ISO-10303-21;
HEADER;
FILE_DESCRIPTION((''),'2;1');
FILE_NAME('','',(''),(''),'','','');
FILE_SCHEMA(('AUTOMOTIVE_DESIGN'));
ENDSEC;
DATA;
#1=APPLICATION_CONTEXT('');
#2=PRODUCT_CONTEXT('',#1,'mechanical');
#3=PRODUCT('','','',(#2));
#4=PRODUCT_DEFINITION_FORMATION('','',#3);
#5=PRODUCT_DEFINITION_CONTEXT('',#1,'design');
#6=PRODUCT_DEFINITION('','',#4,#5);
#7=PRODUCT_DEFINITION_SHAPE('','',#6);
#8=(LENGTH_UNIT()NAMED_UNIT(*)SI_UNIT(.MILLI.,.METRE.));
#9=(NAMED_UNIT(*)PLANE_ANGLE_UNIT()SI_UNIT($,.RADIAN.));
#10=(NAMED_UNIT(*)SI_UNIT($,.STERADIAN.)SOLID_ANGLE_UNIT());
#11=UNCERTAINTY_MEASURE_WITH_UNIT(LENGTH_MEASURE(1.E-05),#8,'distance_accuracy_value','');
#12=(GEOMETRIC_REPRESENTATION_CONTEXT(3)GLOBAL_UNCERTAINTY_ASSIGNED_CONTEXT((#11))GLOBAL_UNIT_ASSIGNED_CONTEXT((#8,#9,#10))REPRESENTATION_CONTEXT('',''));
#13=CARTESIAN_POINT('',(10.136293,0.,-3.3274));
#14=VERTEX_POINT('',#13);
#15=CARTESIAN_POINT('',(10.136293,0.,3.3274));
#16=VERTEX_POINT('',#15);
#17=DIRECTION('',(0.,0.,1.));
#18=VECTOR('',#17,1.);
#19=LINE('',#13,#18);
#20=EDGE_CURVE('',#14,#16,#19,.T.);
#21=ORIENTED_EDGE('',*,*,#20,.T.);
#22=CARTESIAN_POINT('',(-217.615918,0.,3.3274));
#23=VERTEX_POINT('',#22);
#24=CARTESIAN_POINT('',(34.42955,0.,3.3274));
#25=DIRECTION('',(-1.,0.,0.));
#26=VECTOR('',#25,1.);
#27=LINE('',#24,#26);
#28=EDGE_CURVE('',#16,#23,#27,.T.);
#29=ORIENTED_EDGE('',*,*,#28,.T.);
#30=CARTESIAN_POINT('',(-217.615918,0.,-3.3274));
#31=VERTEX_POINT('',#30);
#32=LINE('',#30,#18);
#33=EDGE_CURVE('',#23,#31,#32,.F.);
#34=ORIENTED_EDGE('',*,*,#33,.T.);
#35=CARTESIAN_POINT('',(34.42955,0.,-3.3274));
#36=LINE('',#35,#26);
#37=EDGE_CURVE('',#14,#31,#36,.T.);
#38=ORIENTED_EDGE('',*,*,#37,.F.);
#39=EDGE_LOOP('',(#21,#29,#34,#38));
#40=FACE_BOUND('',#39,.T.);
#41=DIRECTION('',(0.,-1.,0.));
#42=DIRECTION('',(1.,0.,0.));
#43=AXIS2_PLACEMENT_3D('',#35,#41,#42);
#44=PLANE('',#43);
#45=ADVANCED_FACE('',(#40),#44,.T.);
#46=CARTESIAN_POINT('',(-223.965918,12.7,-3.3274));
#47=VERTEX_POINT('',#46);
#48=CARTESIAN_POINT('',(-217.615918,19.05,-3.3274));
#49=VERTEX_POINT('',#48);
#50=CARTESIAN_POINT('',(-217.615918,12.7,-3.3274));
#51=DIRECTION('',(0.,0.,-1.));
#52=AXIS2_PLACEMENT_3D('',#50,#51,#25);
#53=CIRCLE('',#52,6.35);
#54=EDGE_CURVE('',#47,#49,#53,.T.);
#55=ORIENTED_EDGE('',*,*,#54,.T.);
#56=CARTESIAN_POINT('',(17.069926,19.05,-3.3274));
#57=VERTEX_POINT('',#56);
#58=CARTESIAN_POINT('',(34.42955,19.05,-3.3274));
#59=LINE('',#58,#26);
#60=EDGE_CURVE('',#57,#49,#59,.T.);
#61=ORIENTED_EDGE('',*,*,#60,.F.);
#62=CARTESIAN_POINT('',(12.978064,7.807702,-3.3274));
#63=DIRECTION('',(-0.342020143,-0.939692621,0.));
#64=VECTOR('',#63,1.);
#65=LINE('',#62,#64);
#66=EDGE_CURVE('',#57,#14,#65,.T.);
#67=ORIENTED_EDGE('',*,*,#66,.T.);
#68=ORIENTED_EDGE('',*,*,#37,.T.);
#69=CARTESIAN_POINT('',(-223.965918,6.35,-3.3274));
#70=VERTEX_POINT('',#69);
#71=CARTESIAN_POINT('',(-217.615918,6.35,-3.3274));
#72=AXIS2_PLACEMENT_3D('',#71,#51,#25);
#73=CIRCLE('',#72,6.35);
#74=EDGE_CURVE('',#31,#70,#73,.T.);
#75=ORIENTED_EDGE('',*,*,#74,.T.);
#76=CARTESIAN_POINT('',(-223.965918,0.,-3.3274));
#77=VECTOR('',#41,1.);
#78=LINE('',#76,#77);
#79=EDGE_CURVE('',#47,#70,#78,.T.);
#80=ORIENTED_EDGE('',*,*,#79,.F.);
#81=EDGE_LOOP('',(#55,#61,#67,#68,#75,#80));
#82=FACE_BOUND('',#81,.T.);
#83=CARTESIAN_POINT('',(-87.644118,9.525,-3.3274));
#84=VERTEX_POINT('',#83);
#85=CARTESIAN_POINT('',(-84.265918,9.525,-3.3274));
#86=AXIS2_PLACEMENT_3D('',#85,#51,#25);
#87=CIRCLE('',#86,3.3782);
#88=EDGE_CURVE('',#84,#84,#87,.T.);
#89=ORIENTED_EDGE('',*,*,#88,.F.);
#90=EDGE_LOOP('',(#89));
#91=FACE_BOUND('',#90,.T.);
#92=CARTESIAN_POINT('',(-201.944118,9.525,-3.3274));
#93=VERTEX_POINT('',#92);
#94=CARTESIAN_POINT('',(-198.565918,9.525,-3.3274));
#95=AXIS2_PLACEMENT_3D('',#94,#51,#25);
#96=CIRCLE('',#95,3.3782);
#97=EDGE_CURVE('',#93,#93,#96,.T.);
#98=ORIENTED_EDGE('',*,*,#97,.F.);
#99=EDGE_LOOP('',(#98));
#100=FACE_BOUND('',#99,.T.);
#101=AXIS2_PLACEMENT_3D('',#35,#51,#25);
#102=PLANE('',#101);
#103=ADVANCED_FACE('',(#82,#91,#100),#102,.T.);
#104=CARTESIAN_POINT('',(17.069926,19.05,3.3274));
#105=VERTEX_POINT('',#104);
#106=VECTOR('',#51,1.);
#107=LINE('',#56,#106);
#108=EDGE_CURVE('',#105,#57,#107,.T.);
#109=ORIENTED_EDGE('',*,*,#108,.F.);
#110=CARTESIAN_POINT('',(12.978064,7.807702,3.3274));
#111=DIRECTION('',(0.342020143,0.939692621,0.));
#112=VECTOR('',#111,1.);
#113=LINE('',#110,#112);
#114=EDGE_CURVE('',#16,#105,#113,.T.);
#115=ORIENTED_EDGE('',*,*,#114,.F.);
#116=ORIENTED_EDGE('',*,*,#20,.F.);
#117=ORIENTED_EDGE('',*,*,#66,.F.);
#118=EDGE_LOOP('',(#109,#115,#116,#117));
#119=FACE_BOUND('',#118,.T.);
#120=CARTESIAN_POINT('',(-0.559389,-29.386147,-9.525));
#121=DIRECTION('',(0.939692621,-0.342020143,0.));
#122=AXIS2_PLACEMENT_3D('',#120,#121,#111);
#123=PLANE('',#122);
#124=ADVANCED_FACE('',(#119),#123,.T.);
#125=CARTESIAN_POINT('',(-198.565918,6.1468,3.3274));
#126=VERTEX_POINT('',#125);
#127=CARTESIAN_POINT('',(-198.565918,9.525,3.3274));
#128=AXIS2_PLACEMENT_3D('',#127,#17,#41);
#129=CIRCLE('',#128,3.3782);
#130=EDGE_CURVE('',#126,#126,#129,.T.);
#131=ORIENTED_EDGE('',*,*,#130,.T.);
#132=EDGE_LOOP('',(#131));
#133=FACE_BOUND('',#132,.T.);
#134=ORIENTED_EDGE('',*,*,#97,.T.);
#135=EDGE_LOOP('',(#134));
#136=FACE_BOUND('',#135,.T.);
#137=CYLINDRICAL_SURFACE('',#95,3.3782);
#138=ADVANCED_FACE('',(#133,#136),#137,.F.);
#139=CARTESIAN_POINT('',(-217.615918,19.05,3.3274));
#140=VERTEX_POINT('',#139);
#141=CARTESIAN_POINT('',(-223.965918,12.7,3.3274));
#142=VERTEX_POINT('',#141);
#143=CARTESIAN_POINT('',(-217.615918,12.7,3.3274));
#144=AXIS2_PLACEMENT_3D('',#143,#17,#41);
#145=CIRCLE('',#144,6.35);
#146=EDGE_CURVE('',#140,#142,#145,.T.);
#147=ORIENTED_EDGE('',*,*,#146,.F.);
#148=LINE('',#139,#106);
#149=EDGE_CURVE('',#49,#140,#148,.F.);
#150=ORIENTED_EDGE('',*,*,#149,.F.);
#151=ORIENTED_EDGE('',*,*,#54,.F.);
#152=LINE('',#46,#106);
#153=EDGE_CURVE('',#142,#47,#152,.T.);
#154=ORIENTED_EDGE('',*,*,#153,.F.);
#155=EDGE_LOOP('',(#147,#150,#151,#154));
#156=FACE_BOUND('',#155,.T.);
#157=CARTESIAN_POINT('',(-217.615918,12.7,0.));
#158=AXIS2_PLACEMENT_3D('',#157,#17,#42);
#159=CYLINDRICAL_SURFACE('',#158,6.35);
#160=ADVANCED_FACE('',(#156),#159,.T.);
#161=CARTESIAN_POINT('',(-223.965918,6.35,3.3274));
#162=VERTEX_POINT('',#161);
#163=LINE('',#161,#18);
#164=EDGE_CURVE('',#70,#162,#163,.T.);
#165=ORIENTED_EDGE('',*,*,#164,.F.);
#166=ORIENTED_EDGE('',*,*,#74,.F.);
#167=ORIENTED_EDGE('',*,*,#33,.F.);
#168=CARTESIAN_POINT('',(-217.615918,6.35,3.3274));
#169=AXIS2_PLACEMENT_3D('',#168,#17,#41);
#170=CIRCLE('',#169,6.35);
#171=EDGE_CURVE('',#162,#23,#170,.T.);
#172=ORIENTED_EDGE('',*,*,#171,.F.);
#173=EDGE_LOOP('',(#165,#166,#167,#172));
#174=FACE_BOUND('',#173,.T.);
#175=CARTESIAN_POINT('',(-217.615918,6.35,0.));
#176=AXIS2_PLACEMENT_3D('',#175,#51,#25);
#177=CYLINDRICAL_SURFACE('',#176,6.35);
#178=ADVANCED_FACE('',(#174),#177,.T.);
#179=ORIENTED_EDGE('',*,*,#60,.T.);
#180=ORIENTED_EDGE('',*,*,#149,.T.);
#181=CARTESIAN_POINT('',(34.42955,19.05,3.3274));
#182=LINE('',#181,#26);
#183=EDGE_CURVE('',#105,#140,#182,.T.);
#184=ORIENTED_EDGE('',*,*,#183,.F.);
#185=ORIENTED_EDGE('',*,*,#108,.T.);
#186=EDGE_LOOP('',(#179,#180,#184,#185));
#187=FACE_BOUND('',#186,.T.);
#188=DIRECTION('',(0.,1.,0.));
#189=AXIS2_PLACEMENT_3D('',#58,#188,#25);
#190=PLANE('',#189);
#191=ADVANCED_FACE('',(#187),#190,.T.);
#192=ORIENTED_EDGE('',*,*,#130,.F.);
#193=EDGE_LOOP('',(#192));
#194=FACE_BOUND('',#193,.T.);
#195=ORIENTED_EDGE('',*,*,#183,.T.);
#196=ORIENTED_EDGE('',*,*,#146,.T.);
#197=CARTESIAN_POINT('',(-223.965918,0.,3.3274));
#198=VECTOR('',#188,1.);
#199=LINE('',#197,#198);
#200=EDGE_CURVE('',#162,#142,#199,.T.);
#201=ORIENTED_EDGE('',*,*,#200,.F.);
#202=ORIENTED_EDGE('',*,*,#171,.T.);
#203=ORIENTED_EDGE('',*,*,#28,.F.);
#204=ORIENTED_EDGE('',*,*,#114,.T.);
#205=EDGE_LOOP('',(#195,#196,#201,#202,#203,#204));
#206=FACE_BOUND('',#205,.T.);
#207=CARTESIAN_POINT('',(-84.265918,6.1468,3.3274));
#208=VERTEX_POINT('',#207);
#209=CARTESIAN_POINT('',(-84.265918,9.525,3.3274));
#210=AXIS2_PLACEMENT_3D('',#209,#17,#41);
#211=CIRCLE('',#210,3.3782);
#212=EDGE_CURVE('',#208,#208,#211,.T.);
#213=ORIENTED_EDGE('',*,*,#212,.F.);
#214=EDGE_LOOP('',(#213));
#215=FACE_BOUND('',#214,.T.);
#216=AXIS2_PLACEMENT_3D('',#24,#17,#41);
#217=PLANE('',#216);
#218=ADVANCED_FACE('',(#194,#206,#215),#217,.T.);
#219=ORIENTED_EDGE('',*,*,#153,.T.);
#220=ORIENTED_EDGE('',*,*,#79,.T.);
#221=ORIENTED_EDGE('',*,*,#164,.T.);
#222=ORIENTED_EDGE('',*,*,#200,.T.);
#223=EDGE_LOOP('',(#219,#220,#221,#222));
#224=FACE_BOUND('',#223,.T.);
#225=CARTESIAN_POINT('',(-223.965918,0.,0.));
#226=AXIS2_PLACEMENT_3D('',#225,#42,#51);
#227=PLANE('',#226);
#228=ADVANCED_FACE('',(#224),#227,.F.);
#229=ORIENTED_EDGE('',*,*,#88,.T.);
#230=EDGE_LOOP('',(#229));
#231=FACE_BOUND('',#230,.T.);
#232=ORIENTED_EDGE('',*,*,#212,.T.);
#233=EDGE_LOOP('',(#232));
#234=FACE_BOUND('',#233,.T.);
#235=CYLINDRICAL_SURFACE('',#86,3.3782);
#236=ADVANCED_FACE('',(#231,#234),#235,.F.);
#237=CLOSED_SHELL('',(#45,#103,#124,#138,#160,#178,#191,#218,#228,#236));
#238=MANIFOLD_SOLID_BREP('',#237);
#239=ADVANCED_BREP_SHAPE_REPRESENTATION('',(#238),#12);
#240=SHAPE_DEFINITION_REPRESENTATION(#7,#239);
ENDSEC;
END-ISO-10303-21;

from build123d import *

# Parameters (mm, degrees)
STOCK_KEEL_BULB_SUPPORT_1_START     = -3.3274
STOCK_KEEL_BULB_SUPPORT_1_OUTLINE_R = 3.3782
STOCK_KEEL_BULB_SUPPORT_1_DEPTH     = 6.6548
FILLET1_R                           = 6.35


# Read off the part's stored shape, not the designer's step: Stock-Keel_bulb_support-1
with BuildPart() as part:
    # Stock-Keel_bulb_support-1 outline → Stock-Keel_bulb_support-1 (new body)
    with BuildSketch(Plane.XY.offset(STOCK_KEEL_BULB_SUPPORT_1_START)):
        Polygon((-223.965917593, 0), (10.136293283, 0), (17.069926246, 19.05), (-223.965917593, 19.05), align=None)
        with Locations((-198.565917593, 9.525)):
            Circle(STOCK_KEEL_BULB_SUPPORT_1_OUTLINE_R, mode=Mode.SUBTRACT)
        with Locations((-84.265917593, 9.525)):
            Circle(STOCK_KEEL_BULB_SUPPORT_1_OUTLINE_R, mode=Mode.SUBTRACT)
    extrude(amount=STOCK_KEEL_BULB_SUPPORT_1_DEPTH)

    # Fillet1
    fillet1_edges = [part.edges().sort_by_distance(p)[0] for p in [
        (-223.965917593, 19.05, 0),
        (-223.965917593, 0, 0),
    ]]
    fillet(fillet1_edges, radius=FILLET1_R)


solid = part.part
